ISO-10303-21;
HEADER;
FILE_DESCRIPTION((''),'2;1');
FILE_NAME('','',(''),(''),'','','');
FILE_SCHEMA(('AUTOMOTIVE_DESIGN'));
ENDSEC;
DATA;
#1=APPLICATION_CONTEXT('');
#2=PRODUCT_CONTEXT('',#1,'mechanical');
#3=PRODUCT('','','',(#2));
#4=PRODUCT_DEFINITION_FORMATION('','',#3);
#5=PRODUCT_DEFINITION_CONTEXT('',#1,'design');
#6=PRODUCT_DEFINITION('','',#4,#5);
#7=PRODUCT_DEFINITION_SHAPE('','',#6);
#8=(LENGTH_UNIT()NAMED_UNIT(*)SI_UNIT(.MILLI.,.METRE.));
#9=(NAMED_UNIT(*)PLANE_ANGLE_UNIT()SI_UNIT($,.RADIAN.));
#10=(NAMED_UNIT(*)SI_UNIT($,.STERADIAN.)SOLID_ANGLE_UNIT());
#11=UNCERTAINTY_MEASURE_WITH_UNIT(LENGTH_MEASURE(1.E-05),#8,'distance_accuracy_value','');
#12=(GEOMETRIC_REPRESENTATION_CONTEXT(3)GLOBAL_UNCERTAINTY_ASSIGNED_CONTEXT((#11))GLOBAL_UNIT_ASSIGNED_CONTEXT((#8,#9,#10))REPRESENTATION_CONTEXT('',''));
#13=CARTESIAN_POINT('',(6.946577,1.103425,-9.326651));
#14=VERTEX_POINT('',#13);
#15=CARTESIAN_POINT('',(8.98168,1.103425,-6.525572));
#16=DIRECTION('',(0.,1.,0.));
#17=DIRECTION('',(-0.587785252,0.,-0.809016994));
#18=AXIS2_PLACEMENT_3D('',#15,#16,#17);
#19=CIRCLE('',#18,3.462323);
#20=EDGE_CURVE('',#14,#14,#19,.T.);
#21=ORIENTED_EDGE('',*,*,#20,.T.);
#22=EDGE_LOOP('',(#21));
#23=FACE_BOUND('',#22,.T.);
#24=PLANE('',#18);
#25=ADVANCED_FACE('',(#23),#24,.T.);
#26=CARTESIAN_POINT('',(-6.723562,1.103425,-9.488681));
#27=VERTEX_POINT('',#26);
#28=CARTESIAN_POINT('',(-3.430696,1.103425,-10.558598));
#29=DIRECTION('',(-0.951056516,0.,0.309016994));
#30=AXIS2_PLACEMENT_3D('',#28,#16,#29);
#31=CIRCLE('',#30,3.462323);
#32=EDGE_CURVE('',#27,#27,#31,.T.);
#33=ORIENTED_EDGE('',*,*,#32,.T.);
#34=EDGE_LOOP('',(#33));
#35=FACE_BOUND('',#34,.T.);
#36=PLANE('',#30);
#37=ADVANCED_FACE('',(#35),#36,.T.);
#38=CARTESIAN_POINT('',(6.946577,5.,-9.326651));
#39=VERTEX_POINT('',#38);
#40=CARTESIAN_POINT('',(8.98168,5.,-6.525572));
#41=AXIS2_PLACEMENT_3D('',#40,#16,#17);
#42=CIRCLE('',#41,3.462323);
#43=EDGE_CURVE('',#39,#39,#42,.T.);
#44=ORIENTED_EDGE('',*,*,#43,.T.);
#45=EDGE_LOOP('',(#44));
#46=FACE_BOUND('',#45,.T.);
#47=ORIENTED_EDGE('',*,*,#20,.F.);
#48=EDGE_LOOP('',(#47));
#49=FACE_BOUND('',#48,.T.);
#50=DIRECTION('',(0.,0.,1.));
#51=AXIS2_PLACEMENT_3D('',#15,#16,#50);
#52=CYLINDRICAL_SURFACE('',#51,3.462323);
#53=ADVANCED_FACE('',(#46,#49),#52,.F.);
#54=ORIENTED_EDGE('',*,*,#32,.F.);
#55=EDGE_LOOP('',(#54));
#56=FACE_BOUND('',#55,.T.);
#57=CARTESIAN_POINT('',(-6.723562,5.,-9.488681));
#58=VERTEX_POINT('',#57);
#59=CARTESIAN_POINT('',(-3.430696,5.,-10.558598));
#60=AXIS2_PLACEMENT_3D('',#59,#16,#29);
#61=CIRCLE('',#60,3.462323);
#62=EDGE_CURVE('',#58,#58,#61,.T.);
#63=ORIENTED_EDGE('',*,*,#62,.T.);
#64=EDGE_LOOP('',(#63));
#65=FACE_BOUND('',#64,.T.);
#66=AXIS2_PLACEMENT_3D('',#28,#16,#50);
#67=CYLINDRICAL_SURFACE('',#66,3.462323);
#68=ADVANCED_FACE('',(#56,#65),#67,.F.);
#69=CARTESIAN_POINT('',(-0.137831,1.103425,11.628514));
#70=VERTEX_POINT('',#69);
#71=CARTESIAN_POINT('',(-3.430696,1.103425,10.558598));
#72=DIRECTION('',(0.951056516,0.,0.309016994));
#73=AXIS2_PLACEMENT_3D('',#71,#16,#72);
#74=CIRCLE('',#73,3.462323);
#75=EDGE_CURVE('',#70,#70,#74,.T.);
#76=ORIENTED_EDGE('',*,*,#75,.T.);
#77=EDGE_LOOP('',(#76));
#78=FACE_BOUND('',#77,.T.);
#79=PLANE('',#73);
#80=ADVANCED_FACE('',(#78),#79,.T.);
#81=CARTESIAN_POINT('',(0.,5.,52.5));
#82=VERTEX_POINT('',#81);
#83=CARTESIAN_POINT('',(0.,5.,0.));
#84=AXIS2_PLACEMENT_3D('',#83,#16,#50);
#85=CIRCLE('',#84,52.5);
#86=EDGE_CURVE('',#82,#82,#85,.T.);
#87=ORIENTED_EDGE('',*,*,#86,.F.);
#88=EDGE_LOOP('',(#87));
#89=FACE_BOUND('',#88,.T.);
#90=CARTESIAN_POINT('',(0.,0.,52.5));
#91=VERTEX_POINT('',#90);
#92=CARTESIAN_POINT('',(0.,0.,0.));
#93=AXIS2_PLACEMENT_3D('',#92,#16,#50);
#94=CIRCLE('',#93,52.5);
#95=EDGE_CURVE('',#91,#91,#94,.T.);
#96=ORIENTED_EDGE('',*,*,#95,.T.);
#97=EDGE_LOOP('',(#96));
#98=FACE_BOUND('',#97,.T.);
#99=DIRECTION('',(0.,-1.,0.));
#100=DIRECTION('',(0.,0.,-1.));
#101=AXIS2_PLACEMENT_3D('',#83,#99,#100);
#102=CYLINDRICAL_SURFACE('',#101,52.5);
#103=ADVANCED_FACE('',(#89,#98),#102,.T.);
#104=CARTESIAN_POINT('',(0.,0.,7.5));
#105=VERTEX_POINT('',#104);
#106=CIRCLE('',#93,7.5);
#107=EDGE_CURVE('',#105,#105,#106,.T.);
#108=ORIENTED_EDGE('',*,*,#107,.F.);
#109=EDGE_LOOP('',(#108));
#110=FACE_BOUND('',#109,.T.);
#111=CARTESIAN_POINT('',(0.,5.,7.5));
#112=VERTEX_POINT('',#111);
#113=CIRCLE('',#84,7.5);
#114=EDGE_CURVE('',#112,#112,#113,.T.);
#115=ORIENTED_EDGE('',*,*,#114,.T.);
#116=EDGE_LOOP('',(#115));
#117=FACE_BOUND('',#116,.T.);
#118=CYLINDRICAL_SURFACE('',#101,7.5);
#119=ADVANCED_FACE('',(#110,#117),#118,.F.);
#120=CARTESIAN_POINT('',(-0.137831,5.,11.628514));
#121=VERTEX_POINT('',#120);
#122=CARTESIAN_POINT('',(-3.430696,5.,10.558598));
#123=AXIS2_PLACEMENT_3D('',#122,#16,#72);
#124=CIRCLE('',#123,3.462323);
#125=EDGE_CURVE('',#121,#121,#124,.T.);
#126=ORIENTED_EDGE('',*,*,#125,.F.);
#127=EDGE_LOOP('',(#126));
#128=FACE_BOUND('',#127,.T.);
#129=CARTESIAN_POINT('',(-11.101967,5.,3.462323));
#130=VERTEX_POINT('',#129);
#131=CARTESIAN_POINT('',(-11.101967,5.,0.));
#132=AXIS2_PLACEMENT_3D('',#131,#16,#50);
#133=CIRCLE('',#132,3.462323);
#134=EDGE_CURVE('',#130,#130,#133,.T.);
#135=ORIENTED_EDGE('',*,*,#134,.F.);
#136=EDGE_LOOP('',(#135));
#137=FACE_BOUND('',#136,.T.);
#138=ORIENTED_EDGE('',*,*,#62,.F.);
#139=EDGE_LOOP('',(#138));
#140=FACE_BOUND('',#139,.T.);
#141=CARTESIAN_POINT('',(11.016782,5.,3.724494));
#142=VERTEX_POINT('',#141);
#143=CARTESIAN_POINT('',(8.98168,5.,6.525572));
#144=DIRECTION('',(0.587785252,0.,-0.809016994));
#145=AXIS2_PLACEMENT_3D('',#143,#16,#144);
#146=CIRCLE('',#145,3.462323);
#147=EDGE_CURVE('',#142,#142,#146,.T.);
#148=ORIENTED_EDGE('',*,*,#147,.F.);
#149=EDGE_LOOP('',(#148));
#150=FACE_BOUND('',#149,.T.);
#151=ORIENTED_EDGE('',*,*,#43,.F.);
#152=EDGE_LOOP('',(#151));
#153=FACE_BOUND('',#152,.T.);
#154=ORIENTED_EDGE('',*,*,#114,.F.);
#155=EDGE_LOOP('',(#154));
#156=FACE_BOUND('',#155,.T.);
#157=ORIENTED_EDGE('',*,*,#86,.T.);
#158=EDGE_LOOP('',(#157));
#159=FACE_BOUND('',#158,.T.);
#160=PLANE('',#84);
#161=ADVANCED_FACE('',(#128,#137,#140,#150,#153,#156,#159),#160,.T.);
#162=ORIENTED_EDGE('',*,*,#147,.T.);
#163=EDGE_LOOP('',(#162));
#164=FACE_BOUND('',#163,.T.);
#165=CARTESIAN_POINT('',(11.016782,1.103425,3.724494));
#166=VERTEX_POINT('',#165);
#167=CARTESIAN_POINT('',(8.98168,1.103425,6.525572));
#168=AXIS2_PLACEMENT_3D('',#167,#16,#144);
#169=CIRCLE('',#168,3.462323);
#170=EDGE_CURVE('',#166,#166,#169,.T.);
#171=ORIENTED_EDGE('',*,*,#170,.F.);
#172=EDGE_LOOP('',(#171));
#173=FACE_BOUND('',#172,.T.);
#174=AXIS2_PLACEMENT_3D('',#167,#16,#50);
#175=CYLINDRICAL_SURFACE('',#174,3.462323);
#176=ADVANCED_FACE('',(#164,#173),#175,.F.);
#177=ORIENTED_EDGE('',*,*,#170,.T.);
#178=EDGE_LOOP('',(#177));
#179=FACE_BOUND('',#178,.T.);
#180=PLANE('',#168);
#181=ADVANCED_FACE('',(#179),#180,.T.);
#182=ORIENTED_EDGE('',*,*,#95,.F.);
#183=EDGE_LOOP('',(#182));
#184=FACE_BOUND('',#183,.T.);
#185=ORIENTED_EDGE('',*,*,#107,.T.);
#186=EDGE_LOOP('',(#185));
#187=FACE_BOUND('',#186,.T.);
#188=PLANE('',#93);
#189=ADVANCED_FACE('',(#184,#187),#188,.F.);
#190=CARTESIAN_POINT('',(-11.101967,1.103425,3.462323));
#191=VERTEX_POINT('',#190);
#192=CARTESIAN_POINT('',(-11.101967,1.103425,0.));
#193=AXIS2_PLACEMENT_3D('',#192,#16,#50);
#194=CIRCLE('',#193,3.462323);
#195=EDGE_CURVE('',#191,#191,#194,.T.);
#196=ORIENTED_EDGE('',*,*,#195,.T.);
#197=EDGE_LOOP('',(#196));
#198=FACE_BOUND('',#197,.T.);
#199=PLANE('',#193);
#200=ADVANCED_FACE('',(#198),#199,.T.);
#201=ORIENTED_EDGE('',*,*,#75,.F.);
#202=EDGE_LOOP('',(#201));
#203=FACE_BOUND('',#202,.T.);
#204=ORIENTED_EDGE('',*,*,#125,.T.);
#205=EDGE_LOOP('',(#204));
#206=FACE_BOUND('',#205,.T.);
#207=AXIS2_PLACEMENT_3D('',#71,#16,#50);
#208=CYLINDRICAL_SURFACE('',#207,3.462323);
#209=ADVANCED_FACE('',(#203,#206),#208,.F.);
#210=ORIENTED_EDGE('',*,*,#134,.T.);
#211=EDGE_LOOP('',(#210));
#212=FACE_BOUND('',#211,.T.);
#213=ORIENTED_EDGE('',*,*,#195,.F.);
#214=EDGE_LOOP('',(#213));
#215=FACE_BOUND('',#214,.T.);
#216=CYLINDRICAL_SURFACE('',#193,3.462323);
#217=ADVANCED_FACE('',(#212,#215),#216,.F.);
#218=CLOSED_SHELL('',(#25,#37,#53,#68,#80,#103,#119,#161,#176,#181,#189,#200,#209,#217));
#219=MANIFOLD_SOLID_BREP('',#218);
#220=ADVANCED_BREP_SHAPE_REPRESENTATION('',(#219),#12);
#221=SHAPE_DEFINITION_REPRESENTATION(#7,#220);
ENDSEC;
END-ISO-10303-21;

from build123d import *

# Parameters (mm, degrees)
SKETCH1_R           = 52.5
BOSS_EXTRUDE1_DEPTH = 5
SKETCH2_R           = 7.5
CUT_EXTRUDE1_DEPTH  = 75.414380331
SKETCH3_R           = 3.462323391
CUT_EXTRUDE2_DEPTH  = 3.896574918
CIRPATTERN1_COUNT   = 5


with BuildPart() as part:
    # Sketch1 → Boss-Extrude1 (new body)
    with BuildSketch(Plane(origin=(0, 0, 0), x_dir=(1, 0, 0), z_dir=(0, 1, 0))):
        Circle(SKETCH1_R)
    extrude(amount=BOSS_EXTRUDE1_DEPTH)

    # Sketch2 → Cut-Extrude1 (cut, through all)
    with BuildSketch(Plane(origin=(0, 0, 0), x_dir=(1, 0, 0), z_dir=(0, 1, 0))):
        Circle(SKETCH2_R)
    extrude(amount=CUT_EXTRUDE1_DEPTH, mode=Mode.SUBTRACT)

    # Sketch3 → Cut-Extrude2 (cut)
    with BuildSketch(Plane(origin=(0, 5, 0), x_dir=(1, 0, 0), z_dir=(0, 1, 0))):
        with Locations((-11.10196659, 0)):
            Circle(SKETCH3_R)
    cut_extrude2 = extrude(amount=-CUT_EXTRUDE2_DEPTH, mode=Mode.SUBTRACT)

    # CirPattern1: Cut-Extrude2 ×5 about axis
    cirpattern1_axis = Axis((0, 0, 0), (0, 1, 0))
    for i in range(1, CIRPATTERN1_COUNT):
        add(cut_extrude2.rotate(cirpattern1_axis, i * 360 / CIRPATTERN1_COUNT), mode=Mode.SUBTRACT)


solid = part.part
